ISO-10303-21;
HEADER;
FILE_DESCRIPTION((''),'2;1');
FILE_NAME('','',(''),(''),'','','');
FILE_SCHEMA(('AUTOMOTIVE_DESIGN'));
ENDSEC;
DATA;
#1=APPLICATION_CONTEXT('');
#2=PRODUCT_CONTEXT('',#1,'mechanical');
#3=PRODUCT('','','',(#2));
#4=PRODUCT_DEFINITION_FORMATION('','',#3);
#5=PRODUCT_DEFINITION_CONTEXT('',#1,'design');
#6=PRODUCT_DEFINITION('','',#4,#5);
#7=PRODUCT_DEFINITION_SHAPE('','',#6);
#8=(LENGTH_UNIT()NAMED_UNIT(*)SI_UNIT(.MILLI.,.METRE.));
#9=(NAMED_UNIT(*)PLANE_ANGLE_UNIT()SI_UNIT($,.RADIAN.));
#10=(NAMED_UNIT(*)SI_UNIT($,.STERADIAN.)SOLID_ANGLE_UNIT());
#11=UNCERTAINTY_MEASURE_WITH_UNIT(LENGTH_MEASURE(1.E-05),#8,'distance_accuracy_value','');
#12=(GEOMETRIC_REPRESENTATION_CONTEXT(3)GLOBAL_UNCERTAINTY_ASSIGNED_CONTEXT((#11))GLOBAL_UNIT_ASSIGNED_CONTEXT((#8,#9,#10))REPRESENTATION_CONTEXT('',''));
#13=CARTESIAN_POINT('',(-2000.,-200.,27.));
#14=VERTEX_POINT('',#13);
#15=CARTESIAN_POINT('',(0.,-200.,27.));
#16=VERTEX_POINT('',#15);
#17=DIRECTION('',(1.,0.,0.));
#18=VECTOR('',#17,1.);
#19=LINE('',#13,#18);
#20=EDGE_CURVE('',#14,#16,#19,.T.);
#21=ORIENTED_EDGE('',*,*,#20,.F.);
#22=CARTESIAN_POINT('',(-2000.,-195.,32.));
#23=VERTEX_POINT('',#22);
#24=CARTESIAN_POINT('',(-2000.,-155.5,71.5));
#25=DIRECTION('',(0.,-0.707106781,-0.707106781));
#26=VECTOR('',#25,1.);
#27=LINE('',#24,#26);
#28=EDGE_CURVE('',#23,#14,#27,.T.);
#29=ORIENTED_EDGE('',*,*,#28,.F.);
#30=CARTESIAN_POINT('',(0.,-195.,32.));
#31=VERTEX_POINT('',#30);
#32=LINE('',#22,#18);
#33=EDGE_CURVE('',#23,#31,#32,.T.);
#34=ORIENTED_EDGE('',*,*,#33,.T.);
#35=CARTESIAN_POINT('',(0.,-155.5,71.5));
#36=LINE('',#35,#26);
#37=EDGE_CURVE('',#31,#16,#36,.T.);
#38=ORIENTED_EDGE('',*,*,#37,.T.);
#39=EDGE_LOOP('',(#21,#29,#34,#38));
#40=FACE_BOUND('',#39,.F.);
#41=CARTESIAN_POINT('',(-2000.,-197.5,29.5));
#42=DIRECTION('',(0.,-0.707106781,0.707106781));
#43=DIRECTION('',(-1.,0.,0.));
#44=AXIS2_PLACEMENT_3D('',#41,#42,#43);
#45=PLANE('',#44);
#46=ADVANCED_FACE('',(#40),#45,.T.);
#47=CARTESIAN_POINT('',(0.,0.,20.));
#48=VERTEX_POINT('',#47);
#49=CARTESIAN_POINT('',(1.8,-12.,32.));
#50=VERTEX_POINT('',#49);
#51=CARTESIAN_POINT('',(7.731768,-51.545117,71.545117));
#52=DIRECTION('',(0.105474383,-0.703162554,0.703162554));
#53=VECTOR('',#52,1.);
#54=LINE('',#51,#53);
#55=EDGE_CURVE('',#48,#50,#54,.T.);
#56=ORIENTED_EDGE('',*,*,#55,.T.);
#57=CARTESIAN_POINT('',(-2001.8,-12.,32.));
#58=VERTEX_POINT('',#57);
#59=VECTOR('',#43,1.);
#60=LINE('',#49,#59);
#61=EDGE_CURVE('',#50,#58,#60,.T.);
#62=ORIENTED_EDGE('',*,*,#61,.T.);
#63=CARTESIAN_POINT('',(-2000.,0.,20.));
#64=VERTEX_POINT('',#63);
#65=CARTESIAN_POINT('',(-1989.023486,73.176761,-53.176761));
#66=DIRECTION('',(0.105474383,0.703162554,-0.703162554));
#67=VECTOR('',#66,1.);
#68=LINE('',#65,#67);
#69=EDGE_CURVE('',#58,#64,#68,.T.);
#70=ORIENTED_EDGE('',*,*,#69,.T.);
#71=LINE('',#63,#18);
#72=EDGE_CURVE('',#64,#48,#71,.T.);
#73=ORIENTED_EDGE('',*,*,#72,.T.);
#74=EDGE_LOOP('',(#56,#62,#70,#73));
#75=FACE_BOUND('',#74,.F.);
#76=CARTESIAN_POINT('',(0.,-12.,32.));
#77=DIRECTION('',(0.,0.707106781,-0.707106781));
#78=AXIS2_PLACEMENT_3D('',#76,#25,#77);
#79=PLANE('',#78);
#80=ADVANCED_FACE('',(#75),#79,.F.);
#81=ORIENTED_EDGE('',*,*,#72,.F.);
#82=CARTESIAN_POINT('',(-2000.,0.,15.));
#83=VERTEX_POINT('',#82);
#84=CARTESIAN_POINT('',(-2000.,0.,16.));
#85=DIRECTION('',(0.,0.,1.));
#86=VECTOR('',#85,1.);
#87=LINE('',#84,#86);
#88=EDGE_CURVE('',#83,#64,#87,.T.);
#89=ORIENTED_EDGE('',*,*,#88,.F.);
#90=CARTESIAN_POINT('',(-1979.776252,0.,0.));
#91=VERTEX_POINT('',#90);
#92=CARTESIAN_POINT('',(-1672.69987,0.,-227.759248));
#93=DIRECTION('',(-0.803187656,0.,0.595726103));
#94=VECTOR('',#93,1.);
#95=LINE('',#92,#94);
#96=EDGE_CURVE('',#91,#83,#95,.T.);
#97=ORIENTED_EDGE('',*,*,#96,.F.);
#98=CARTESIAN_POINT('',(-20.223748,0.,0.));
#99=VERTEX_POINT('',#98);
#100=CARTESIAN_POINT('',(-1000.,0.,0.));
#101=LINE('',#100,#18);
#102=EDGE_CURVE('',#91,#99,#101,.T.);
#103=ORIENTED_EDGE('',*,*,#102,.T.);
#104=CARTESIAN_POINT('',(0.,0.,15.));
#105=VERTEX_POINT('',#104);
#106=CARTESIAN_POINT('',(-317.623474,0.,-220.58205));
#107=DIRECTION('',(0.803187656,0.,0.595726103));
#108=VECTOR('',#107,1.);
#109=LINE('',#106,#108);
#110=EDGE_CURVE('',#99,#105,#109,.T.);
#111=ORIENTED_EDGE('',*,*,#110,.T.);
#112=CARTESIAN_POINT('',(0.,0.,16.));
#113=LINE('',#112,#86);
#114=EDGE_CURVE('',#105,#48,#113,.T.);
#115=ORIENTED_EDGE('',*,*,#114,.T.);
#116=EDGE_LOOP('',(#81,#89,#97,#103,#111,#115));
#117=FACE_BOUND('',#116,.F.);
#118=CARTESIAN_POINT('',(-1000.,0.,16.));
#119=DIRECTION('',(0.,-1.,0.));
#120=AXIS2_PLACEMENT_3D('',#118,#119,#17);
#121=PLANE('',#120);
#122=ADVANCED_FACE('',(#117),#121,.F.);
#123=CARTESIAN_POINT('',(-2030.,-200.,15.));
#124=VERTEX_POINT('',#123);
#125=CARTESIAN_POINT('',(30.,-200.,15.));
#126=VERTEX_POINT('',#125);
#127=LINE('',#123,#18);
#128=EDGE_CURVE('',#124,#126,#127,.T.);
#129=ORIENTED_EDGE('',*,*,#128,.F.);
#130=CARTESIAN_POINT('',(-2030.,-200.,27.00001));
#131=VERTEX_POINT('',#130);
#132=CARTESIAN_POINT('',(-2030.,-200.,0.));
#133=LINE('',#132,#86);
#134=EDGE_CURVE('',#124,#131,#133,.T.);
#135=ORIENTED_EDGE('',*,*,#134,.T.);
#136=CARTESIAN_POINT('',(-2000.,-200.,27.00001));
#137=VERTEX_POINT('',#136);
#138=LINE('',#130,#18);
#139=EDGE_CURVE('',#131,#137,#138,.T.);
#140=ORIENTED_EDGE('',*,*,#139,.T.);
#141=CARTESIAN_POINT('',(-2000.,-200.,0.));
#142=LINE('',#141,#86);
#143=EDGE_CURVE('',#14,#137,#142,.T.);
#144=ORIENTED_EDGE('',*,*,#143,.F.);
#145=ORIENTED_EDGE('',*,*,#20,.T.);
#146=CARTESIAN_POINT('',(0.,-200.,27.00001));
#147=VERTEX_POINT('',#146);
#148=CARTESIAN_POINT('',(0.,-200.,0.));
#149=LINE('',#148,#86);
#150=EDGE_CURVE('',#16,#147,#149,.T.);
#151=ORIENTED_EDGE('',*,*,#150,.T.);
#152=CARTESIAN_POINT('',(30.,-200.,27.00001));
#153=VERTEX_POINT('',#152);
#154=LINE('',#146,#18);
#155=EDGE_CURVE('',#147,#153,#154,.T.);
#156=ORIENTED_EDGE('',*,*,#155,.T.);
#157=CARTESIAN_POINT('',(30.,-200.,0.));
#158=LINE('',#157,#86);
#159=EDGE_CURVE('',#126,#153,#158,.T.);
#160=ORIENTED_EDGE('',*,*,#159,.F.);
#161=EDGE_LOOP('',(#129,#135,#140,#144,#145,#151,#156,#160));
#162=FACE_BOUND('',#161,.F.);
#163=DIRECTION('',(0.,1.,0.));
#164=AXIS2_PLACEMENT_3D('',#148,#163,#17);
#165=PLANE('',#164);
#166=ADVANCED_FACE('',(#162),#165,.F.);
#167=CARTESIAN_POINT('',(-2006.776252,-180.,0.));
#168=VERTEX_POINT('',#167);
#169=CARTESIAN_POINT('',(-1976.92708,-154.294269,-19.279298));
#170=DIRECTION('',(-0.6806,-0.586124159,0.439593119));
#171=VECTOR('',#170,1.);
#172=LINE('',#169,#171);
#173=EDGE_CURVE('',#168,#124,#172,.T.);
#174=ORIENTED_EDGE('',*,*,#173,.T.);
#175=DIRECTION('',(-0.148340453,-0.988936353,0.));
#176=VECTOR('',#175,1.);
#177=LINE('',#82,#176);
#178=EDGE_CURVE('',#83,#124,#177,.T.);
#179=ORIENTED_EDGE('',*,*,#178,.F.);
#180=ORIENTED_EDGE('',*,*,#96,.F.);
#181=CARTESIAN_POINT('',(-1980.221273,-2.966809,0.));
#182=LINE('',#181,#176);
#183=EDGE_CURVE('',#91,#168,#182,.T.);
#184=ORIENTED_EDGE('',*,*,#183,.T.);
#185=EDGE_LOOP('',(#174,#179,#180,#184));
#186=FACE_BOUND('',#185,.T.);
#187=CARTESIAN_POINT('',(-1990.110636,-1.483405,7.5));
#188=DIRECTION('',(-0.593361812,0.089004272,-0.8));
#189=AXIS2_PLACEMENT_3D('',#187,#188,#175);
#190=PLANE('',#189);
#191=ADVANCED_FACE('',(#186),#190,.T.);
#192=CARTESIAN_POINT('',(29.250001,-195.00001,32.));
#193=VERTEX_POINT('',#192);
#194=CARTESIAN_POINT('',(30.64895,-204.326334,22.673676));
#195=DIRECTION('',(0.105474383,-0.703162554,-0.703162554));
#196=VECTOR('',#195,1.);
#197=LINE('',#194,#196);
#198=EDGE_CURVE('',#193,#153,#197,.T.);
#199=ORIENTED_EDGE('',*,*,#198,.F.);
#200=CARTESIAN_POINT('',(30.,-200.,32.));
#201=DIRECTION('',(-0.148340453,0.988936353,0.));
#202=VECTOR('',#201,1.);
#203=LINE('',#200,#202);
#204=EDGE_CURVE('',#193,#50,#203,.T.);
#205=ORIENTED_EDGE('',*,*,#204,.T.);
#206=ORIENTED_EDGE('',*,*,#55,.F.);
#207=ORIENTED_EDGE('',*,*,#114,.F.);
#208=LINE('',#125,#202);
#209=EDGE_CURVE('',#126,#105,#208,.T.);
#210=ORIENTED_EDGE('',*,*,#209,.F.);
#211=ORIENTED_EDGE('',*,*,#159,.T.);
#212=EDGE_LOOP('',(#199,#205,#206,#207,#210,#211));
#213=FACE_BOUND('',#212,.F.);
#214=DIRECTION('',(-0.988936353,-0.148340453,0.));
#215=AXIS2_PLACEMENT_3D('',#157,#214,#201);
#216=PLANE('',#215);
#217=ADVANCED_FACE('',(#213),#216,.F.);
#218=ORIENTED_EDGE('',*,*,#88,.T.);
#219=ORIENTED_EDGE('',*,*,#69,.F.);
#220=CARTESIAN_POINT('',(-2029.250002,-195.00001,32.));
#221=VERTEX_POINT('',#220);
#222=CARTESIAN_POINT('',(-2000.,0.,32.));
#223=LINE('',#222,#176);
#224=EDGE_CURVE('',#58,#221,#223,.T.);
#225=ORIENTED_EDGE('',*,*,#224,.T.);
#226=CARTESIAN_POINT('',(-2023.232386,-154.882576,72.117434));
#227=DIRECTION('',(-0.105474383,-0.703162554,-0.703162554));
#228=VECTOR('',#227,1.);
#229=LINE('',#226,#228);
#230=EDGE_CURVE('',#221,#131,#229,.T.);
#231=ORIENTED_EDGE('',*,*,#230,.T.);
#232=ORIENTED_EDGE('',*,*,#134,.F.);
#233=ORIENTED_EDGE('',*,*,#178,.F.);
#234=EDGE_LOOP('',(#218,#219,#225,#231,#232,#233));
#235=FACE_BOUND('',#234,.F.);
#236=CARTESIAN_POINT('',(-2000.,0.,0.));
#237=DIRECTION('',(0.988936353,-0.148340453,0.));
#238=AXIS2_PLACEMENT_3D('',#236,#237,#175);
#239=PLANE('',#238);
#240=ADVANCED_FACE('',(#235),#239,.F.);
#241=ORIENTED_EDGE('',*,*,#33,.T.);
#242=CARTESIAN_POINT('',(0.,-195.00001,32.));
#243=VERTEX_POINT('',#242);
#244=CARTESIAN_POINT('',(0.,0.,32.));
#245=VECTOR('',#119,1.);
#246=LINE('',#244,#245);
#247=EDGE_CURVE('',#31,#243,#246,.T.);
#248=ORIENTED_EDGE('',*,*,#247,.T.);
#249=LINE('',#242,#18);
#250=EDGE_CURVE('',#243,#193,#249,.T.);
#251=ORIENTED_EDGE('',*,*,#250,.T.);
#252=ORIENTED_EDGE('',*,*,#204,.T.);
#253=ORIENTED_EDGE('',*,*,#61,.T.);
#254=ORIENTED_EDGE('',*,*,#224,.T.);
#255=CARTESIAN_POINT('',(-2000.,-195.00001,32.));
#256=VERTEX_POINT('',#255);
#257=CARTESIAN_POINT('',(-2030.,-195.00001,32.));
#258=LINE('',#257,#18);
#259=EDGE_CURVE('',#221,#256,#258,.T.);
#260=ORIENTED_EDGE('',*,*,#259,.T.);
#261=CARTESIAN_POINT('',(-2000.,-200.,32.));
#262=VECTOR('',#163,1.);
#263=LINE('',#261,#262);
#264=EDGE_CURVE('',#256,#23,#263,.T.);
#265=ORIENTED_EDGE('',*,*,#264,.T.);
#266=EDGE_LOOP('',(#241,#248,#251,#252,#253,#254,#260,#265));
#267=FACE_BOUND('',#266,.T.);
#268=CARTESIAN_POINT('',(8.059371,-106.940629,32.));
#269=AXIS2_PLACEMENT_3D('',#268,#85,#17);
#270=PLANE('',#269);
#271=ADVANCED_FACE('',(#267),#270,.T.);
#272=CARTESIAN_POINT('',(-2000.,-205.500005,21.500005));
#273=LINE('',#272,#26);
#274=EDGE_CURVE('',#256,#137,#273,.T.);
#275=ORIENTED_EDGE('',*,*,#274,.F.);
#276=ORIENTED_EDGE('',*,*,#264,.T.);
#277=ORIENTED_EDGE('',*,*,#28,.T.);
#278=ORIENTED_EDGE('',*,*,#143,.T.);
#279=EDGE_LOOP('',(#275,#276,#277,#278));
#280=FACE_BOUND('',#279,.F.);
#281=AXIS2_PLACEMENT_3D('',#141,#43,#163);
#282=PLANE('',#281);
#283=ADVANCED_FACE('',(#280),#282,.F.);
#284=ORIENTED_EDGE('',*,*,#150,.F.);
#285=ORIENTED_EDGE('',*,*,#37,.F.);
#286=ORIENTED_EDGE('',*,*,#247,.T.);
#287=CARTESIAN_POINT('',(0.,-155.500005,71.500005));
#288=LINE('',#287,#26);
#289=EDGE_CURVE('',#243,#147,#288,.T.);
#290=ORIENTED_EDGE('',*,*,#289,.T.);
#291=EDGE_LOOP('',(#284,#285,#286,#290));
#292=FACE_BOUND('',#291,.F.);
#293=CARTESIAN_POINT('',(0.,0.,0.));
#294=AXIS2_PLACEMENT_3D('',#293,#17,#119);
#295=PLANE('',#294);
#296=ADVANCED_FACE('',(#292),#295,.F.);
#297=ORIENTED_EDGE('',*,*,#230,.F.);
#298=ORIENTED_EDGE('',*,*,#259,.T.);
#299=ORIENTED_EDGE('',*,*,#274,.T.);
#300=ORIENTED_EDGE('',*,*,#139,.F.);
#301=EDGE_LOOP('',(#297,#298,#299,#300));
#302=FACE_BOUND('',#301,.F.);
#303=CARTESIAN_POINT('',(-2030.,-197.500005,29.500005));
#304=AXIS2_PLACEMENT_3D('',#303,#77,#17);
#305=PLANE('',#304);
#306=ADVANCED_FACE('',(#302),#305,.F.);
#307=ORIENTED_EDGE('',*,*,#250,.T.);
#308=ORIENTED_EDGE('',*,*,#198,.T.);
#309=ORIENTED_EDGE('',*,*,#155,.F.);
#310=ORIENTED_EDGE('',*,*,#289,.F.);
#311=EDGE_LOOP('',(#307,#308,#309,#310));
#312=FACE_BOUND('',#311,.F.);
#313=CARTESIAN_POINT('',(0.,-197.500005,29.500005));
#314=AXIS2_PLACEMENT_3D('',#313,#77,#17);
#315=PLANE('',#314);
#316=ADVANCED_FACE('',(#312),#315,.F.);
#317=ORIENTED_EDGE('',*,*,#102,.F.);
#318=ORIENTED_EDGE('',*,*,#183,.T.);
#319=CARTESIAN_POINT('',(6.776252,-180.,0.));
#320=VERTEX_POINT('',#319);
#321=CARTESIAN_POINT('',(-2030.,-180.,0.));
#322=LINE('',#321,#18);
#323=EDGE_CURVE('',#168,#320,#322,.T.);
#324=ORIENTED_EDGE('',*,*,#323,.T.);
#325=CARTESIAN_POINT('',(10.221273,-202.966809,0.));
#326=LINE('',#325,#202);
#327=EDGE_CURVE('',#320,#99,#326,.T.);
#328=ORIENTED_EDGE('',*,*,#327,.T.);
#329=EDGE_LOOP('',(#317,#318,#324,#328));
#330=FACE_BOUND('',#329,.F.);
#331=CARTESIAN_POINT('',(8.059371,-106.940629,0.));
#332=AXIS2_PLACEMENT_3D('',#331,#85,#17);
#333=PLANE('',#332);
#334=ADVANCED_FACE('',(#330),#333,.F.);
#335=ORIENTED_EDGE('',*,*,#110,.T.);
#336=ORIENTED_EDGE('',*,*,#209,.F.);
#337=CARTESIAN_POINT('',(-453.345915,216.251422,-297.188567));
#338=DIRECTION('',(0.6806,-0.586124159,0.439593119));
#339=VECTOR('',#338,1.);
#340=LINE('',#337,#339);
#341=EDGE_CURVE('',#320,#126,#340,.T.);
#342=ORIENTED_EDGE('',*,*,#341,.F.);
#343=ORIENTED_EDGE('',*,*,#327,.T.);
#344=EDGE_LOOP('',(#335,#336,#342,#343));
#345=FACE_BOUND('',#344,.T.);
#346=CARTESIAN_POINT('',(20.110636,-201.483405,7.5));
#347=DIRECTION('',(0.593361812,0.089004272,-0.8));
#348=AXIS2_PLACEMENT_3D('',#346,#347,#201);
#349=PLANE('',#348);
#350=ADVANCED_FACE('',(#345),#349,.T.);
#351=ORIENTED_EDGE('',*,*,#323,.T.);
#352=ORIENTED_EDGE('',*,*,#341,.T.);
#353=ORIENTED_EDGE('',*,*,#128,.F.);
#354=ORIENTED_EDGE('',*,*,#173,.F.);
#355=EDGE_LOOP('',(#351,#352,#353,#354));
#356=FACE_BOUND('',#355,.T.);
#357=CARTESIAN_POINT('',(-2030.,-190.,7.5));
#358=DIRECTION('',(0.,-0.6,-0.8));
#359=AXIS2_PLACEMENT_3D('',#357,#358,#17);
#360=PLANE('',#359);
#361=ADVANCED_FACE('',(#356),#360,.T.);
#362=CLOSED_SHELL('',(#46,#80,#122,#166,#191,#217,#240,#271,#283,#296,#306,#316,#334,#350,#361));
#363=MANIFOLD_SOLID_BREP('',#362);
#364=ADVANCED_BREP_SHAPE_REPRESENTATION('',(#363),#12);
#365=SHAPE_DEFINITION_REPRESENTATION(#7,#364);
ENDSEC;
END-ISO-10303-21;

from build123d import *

# Parameters (mm, degrees)
F0_W      = 2000
F0_H      = 32
F1_DEPTH  = 200
F2_SIZE   = 12
F3_SIZE   = 5
F5_DEPTH  = 32
F6_SIZE   = 4.99999
F7_SIZE   = 4.99999
F9_DEPTH  = 2097
F10_SIZE2 = 15
F10_SIZE  = 20


# Not quite as in the source:
# - a fillet or chamfer is up to 0.001 mm smaller than in the source, because OpenCascade refuses the exact size


with BuildPart() as f1:
    # F0 (on Front) → F1 (new body)
    with BuildSketch(Plane.XZ):
        with Locations((-1000, 16)):
            Rectangle(F0_W, F0_H)
    extrude(amount=F1_DEPTH)

    # F2
    f2_edges = [f1.edges().sort_by_distance(p)[0] for p in [
        (-1000, 0, 32),
    ]]
    chamfer(f2_edges, length=F2_SIZE)

    # F3
    f3_edges = [f1.edges().sort_by_distance(p)[0] for p in [
        (-1000, -200, 32),
    ]]
    chamfer(f3_edges, length=F3_SIZE)

    # F4 (on Top) → F5 (join)
    with BuildSketch(Plane.XY):
        Polygon((30, -200), (0, 0), (0, -200), align=None)
        Polygon((-2000, 0), (-2030, -200), (-2000, -200), align=None)
    extrude(amount=F5_DEPTH)

    # F6 (size 5 in the source; OpenCascade refuses exactly that, so slightly less here)
    f6_edges = [f1.edges().sort_by_distance(p)[0] for p in [
        (-2015, -200, 32),
    ]]
    chamfer(f6_edges, length=F6_SIZE)

    # F7 (size 5 in the source; OpenCascade refuses exactly that, so slightly less here)
    f7_edges = [f1.edges().sort_by_distance(p)[0] for p in [
        (15, -200, 32),
    ]]
    chamfer(f7_edges, length=F7_SIZE)

    # F8 (on Right) → F9 (cut, symmetric)
    with BuildSketch(Plane.YZ):
        Polygon((-12, 32), (0, 20), (0, 32), align=None)
    extrude(amount=F9_DEPTH, both=True, mode=Mode.SUBTRACT)

    # F10
    f10_edges = [f1.edges().sort_by_distance(p)[0] for p in [
        (-1000, -200, 0),
        (-2015, -100, 0),
        (15, -100, 0),
    ]]
    f10_side = f1.faces().sort_by_distance((-1000, -100.492611, 0))[0]
    chamfer(f10_edges, length=F10_SIZE, length2=F10_SIZE2, reference=f10_side)


solid = f1.part
